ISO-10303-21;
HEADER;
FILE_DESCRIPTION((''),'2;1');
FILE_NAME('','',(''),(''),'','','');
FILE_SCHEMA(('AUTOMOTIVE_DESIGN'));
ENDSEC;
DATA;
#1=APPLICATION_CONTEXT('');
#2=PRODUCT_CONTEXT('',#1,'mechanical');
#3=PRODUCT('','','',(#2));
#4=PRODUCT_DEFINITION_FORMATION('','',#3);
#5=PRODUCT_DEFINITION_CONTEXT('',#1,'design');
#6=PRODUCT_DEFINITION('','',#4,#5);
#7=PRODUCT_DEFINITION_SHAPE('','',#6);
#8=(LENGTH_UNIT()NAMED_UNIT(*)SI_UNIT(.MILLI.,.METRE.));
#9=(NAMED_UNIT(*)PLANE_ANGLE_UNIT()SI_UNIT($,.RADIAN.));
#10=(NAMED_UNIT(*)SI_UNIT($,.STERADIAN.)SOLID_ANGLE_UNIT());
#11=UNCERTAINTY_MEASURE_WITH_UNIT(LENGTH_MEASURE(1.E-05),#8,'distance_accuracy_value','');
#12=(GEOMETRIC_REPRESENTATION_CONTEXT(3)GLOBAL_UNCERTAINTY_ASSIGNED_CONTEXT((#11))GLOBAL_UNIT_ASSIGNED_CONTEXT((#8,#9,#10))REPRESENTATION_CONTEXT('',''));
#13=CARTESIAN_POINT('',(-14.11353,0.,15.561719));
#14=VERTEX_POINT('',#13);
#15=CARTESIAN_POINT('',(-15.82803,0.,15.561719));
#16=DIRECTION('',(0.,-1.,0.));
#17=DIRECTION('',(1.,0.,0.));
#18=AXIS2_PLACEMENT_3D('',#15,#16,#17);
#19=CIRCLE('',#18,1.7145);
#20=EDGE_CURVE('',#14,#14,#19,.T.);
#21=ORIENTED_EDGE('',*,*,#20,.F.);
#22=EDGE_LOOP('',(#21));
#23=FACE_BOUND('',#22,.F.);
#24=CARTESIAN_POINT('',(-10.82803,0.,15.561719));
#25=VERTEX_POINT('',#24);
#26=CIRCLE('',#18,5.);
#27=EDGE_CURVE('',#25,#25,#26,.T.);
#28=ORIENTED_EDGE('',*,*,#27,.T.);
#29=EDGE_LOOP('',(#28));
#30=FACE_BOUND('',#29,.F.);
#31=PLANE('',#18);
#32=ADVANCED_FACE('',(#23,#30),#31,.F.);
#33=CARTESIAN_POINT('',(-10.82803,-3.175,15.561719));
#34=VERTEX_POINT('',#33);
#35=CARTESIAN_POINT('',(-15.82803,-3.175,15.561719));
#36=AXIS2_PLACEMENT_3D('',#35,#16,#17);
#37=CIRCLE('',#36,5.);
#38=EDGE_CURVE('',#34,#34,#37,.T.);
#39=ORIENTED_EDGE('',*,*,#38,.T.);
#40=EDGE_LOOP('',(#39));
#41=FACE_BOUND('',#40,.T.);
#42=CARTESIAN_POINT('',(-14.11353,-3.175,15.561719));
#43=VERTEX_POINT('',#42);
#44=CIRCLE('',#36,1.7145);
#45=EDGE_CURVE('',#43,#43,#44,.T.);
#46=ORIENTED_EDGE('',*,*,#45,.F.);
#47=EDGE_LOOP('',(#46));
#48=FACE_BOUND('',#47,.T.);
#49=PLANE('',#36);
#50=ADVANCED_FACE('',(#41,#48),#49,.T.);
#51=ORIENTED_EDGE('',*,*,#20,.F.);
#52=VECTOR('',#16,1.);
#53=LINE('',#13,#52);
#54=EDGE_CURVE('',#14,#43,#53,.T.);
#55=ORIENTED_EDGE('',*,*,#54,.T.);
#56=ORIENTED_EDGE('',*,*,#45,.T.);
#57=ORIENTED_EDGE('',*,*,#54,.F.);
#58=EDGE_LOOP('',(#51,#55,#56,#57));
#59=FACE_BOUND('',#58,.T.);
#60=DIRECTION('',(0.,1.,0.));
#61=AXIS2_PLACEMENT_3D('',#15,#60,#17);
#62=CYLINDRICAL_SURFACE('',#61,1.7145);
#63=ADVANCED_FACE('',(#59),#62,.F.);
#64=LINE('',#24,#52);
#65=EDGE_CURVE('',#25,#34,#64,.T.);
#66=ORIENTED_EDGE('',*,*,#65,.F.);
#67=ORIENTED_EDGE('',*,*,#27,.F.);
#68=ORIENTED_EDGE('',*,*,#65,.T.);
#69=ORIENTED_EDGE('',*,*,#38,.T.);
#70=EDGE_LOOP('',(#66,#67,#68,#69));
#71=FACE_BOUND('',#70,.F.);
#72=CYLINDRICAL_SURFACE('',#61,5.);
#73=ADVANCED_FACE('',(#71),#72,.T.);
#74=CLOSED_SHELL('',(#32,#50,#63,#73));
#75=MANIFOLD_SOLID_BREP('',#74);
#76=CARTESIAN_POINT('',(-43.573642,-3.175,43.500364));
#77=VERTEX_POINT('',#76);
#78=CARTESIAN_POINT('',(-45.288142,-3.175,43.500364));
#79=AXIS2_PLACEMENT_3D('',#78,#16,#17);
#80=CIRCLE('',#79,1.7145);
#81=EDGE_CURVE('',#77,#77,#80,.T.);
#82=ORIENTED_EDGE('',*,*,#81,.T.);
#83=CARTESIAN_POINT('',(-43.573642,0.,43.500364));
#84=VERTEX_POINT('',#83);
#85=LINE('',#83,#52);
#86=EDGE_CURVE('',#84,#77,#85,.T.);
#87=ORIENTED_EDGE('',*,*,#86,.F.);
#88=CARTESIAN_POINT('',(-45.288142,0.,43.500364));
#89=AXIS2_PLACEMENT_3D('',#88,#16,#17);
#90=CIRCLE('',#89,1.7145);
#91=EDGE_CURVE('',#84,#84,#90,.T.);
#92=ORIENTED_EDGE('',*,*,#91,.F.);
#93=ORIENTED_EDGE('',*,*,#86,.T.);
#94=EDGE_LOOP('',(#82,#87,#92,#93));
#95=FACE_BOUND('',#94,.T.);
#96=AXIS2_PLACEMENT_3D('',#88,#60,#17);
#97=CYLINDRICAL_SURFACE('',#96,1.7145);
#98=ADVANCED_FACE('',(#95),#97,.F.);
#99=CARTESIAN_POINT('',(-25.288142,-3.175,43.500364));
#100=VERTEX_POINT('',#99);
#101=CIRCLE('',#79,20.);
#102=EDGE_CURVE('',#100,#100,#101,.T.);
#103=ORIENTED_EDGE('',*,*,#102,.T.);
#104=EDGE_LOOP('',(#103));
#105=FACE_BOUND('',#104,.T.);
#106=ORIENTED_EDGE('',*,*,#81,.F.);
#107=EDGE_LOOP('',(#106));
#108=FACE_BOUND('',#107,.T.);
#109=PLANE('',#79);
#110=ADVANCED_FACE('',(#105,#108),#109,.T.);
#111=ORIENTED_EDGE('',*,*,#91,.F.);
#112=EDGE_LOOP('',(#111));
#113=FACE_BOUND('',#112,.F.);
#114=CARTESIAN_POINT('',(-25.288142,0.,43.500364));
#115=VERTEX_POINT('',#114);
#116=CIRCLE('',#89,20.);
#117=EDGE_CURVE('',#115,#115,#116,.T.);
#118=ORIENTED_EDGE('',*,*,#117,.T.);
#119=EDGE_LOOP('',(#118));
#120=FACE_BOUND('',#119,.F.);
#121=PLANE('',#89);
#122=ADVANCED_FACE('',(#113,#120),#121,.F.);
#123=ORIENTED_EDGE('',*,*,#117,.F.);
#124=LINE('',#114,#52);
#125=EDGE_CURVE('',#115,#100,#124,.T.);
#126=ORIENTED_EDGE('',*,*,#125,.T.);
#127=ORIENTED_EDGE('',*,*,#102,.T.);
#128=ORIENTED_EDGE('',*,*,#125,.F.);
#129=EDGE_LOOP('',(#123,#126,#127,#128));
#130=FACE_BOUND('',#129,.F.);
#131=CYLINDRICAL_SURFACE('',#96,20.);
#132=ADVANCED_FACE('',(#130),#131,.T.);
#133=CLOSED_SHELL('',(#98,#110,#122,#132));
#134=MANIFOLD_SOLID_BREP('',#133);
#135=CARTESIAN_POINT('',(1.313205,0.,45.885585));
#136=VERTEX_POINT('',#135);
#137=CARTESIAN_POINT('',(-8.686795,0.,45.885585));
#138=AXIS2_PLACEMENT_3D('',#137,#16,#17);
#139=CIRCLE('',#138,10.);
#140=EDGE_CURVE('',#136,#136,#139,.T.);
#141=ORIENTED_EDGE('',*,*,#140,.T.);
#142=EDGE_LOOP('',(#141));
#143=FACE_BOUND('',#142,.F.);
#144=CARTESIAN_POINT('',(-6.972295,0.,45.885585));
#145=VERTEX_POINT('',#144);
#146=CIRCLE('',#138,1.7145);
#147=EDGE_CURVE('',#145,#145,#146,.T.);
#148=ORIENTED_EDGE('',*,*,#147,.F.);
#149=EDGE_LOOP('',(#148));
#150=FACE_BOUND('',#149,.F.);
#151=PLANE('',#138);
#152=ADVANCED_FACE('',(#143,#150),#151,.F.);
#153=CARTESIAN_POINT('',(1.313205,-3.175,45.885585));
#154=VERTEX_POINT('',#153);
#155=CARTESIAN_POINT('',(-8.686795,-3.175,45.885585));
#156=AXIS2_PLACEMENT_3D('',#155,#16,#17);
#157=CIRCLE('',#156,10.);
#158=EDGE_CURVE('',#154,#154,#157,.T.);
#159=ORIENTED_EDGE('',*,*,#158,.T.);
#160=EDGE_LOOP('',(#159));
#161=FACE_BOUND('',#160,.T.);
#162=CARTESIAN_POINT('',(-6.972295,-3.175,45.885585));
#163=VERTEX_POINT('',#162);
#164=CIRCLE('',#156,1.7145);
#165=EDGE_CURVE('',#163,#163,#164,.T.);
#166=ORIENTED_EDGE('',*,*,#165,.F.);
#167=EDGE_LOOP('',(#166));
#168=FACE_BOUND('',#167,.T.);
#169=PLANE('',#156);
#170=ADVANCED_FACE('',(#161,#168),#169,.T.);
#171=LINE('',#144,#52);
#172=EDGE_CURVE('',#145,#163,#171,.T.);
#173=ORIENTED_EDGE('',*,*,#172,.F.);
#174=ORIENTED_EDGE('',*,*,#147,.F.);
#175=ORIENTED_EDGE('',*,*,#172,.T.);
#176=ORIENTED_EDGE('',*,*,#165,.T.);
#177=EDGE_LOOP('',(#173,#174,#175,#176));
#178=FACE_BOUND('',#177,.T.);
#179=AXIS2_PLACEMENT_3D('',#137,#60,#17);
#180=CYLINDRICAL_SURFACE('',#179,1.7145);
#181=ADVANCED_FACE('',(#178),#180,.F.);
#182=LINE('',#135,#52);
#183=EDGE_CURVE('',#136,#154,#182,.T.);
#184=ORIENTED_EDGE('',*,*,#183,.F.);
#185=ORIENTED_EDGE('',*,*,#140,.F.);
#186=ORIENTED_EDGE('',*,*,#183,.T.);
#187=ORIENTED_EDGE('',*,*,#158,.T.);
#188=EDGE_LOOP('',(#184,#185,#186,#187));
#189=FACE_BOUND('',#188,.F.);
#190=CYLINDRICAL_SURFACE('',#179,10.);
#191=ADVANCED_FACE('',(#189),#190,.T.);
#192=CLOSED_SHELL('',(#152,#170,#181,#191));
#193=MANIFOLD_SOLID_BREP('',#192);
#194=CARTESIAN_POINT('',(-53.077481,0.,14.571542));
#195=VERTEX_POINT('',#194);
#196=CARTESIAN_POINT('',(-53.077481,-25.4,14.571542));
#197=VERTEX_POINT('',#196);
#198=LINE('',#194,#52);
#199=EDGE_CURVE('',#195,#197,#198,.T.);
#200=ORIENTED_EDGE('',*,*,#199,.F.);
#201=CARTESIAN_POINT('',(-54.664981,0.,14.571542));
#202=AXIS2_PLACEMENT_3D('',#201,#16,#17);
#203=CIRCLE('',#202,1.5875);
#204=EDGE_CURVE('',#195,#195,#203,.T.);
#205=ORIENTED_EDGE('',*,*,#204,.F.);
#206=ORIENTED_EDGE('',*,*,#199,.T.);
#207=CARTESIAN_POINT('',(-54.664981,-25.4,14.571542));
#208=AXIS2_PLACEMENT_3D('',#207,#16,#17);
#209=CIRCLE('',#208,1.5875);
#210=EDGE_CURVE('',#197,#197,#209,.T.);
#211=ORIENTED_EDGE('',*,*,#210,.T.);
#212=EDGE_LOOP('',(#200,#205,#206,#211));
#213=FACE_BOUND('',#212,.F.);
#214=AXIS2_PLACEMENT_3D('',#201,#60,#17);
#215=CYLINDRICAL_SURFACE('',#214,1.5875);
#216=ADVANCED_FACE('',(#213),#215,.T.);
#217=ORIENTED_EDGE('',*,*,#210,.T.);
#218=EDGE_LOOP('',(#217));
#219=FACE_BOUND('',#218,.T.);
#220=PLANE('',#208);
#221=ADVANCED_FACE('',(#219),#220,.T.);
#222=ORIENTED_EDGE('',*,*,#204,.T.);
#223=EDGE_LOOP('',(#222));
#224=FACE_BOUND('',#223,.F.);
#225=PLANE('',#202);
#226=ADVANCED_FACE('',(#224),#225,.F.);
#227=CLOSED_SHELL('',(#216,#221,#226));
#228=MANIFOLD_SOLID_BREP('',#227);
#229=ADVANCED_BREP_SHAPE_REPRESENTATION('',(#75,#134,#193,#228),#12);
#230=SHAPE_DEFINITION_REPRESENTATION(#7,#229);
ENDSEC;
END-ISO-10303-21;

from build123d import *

# Parameters (mm, degrees)
F0_R     = 20
F0_R_2   = 1.7145
F1_DEPTH = 3.175
F2_R     = 10
F2_R_2   = 1.7145
F3_DEPTH = 3.175
F4_R     = 5
F4_R_2   = 1.7145
F5_DEPTH = 3.175
F6_R     = 1.5875
F7_DEPTH = 25.4


# Not quite as in the source:
# - a length typed as a fraction of an inch, garbled in the dataset ("3 / 203.2 mm" for 3/8 in), is restored


with BuildPart() as f1:
    # F0 (on Front) → F1 (new body)
    with BuildSketch(Plane.XZ):
        with Locations((-45.2881418169, 43.5003638268)):
            Circle(F0_R)
        with Locations((-45.2881418169, 43.5003638268)):
            Circle(F0_R_2, mode=Mode.SUBTRACT)
    extrude(amount=F1_DEPTH)


with BuildPart() as f3:
    # F2 (on Front) → F3 (new body)
    with BuildSketch(Plane.XZ):
        with Locations((-8.6867948994, 45.8855852485)):
            Circle(F2_R)
        with Locations((-8.6867948994, 45.8855852485)):
            Circle(F2_R_2, mode=Mode.SUBTRACT)
    extrude(amount=F3_DEPTH)


with BuildPart() as f5:
    # F4 (on Front) → F5 (new body)
    with BuildSketch(Plane.XZ):
        with Locations((-15.8280301839, 15.561719425)):
            Circle(F4_R)
        with Locations((-15.8280301839, 15.561719425)):
            Circle(F4_R_2, mode=Mode.SUBTRACT)
    extrude(amount=F5_DEPTH)


with BuildPart() as f7:
    # F6 (on Front) → F7 (new body)
    with BuildSketch(Plane.XZ):
        with Locations((-54.6649806201, 14.5715419203)):
            Circle(F6_R)
    extrude(amount=F7_DEPTH)


solid = Compound([f1.part, f3.part, f5.part, f7.part])
